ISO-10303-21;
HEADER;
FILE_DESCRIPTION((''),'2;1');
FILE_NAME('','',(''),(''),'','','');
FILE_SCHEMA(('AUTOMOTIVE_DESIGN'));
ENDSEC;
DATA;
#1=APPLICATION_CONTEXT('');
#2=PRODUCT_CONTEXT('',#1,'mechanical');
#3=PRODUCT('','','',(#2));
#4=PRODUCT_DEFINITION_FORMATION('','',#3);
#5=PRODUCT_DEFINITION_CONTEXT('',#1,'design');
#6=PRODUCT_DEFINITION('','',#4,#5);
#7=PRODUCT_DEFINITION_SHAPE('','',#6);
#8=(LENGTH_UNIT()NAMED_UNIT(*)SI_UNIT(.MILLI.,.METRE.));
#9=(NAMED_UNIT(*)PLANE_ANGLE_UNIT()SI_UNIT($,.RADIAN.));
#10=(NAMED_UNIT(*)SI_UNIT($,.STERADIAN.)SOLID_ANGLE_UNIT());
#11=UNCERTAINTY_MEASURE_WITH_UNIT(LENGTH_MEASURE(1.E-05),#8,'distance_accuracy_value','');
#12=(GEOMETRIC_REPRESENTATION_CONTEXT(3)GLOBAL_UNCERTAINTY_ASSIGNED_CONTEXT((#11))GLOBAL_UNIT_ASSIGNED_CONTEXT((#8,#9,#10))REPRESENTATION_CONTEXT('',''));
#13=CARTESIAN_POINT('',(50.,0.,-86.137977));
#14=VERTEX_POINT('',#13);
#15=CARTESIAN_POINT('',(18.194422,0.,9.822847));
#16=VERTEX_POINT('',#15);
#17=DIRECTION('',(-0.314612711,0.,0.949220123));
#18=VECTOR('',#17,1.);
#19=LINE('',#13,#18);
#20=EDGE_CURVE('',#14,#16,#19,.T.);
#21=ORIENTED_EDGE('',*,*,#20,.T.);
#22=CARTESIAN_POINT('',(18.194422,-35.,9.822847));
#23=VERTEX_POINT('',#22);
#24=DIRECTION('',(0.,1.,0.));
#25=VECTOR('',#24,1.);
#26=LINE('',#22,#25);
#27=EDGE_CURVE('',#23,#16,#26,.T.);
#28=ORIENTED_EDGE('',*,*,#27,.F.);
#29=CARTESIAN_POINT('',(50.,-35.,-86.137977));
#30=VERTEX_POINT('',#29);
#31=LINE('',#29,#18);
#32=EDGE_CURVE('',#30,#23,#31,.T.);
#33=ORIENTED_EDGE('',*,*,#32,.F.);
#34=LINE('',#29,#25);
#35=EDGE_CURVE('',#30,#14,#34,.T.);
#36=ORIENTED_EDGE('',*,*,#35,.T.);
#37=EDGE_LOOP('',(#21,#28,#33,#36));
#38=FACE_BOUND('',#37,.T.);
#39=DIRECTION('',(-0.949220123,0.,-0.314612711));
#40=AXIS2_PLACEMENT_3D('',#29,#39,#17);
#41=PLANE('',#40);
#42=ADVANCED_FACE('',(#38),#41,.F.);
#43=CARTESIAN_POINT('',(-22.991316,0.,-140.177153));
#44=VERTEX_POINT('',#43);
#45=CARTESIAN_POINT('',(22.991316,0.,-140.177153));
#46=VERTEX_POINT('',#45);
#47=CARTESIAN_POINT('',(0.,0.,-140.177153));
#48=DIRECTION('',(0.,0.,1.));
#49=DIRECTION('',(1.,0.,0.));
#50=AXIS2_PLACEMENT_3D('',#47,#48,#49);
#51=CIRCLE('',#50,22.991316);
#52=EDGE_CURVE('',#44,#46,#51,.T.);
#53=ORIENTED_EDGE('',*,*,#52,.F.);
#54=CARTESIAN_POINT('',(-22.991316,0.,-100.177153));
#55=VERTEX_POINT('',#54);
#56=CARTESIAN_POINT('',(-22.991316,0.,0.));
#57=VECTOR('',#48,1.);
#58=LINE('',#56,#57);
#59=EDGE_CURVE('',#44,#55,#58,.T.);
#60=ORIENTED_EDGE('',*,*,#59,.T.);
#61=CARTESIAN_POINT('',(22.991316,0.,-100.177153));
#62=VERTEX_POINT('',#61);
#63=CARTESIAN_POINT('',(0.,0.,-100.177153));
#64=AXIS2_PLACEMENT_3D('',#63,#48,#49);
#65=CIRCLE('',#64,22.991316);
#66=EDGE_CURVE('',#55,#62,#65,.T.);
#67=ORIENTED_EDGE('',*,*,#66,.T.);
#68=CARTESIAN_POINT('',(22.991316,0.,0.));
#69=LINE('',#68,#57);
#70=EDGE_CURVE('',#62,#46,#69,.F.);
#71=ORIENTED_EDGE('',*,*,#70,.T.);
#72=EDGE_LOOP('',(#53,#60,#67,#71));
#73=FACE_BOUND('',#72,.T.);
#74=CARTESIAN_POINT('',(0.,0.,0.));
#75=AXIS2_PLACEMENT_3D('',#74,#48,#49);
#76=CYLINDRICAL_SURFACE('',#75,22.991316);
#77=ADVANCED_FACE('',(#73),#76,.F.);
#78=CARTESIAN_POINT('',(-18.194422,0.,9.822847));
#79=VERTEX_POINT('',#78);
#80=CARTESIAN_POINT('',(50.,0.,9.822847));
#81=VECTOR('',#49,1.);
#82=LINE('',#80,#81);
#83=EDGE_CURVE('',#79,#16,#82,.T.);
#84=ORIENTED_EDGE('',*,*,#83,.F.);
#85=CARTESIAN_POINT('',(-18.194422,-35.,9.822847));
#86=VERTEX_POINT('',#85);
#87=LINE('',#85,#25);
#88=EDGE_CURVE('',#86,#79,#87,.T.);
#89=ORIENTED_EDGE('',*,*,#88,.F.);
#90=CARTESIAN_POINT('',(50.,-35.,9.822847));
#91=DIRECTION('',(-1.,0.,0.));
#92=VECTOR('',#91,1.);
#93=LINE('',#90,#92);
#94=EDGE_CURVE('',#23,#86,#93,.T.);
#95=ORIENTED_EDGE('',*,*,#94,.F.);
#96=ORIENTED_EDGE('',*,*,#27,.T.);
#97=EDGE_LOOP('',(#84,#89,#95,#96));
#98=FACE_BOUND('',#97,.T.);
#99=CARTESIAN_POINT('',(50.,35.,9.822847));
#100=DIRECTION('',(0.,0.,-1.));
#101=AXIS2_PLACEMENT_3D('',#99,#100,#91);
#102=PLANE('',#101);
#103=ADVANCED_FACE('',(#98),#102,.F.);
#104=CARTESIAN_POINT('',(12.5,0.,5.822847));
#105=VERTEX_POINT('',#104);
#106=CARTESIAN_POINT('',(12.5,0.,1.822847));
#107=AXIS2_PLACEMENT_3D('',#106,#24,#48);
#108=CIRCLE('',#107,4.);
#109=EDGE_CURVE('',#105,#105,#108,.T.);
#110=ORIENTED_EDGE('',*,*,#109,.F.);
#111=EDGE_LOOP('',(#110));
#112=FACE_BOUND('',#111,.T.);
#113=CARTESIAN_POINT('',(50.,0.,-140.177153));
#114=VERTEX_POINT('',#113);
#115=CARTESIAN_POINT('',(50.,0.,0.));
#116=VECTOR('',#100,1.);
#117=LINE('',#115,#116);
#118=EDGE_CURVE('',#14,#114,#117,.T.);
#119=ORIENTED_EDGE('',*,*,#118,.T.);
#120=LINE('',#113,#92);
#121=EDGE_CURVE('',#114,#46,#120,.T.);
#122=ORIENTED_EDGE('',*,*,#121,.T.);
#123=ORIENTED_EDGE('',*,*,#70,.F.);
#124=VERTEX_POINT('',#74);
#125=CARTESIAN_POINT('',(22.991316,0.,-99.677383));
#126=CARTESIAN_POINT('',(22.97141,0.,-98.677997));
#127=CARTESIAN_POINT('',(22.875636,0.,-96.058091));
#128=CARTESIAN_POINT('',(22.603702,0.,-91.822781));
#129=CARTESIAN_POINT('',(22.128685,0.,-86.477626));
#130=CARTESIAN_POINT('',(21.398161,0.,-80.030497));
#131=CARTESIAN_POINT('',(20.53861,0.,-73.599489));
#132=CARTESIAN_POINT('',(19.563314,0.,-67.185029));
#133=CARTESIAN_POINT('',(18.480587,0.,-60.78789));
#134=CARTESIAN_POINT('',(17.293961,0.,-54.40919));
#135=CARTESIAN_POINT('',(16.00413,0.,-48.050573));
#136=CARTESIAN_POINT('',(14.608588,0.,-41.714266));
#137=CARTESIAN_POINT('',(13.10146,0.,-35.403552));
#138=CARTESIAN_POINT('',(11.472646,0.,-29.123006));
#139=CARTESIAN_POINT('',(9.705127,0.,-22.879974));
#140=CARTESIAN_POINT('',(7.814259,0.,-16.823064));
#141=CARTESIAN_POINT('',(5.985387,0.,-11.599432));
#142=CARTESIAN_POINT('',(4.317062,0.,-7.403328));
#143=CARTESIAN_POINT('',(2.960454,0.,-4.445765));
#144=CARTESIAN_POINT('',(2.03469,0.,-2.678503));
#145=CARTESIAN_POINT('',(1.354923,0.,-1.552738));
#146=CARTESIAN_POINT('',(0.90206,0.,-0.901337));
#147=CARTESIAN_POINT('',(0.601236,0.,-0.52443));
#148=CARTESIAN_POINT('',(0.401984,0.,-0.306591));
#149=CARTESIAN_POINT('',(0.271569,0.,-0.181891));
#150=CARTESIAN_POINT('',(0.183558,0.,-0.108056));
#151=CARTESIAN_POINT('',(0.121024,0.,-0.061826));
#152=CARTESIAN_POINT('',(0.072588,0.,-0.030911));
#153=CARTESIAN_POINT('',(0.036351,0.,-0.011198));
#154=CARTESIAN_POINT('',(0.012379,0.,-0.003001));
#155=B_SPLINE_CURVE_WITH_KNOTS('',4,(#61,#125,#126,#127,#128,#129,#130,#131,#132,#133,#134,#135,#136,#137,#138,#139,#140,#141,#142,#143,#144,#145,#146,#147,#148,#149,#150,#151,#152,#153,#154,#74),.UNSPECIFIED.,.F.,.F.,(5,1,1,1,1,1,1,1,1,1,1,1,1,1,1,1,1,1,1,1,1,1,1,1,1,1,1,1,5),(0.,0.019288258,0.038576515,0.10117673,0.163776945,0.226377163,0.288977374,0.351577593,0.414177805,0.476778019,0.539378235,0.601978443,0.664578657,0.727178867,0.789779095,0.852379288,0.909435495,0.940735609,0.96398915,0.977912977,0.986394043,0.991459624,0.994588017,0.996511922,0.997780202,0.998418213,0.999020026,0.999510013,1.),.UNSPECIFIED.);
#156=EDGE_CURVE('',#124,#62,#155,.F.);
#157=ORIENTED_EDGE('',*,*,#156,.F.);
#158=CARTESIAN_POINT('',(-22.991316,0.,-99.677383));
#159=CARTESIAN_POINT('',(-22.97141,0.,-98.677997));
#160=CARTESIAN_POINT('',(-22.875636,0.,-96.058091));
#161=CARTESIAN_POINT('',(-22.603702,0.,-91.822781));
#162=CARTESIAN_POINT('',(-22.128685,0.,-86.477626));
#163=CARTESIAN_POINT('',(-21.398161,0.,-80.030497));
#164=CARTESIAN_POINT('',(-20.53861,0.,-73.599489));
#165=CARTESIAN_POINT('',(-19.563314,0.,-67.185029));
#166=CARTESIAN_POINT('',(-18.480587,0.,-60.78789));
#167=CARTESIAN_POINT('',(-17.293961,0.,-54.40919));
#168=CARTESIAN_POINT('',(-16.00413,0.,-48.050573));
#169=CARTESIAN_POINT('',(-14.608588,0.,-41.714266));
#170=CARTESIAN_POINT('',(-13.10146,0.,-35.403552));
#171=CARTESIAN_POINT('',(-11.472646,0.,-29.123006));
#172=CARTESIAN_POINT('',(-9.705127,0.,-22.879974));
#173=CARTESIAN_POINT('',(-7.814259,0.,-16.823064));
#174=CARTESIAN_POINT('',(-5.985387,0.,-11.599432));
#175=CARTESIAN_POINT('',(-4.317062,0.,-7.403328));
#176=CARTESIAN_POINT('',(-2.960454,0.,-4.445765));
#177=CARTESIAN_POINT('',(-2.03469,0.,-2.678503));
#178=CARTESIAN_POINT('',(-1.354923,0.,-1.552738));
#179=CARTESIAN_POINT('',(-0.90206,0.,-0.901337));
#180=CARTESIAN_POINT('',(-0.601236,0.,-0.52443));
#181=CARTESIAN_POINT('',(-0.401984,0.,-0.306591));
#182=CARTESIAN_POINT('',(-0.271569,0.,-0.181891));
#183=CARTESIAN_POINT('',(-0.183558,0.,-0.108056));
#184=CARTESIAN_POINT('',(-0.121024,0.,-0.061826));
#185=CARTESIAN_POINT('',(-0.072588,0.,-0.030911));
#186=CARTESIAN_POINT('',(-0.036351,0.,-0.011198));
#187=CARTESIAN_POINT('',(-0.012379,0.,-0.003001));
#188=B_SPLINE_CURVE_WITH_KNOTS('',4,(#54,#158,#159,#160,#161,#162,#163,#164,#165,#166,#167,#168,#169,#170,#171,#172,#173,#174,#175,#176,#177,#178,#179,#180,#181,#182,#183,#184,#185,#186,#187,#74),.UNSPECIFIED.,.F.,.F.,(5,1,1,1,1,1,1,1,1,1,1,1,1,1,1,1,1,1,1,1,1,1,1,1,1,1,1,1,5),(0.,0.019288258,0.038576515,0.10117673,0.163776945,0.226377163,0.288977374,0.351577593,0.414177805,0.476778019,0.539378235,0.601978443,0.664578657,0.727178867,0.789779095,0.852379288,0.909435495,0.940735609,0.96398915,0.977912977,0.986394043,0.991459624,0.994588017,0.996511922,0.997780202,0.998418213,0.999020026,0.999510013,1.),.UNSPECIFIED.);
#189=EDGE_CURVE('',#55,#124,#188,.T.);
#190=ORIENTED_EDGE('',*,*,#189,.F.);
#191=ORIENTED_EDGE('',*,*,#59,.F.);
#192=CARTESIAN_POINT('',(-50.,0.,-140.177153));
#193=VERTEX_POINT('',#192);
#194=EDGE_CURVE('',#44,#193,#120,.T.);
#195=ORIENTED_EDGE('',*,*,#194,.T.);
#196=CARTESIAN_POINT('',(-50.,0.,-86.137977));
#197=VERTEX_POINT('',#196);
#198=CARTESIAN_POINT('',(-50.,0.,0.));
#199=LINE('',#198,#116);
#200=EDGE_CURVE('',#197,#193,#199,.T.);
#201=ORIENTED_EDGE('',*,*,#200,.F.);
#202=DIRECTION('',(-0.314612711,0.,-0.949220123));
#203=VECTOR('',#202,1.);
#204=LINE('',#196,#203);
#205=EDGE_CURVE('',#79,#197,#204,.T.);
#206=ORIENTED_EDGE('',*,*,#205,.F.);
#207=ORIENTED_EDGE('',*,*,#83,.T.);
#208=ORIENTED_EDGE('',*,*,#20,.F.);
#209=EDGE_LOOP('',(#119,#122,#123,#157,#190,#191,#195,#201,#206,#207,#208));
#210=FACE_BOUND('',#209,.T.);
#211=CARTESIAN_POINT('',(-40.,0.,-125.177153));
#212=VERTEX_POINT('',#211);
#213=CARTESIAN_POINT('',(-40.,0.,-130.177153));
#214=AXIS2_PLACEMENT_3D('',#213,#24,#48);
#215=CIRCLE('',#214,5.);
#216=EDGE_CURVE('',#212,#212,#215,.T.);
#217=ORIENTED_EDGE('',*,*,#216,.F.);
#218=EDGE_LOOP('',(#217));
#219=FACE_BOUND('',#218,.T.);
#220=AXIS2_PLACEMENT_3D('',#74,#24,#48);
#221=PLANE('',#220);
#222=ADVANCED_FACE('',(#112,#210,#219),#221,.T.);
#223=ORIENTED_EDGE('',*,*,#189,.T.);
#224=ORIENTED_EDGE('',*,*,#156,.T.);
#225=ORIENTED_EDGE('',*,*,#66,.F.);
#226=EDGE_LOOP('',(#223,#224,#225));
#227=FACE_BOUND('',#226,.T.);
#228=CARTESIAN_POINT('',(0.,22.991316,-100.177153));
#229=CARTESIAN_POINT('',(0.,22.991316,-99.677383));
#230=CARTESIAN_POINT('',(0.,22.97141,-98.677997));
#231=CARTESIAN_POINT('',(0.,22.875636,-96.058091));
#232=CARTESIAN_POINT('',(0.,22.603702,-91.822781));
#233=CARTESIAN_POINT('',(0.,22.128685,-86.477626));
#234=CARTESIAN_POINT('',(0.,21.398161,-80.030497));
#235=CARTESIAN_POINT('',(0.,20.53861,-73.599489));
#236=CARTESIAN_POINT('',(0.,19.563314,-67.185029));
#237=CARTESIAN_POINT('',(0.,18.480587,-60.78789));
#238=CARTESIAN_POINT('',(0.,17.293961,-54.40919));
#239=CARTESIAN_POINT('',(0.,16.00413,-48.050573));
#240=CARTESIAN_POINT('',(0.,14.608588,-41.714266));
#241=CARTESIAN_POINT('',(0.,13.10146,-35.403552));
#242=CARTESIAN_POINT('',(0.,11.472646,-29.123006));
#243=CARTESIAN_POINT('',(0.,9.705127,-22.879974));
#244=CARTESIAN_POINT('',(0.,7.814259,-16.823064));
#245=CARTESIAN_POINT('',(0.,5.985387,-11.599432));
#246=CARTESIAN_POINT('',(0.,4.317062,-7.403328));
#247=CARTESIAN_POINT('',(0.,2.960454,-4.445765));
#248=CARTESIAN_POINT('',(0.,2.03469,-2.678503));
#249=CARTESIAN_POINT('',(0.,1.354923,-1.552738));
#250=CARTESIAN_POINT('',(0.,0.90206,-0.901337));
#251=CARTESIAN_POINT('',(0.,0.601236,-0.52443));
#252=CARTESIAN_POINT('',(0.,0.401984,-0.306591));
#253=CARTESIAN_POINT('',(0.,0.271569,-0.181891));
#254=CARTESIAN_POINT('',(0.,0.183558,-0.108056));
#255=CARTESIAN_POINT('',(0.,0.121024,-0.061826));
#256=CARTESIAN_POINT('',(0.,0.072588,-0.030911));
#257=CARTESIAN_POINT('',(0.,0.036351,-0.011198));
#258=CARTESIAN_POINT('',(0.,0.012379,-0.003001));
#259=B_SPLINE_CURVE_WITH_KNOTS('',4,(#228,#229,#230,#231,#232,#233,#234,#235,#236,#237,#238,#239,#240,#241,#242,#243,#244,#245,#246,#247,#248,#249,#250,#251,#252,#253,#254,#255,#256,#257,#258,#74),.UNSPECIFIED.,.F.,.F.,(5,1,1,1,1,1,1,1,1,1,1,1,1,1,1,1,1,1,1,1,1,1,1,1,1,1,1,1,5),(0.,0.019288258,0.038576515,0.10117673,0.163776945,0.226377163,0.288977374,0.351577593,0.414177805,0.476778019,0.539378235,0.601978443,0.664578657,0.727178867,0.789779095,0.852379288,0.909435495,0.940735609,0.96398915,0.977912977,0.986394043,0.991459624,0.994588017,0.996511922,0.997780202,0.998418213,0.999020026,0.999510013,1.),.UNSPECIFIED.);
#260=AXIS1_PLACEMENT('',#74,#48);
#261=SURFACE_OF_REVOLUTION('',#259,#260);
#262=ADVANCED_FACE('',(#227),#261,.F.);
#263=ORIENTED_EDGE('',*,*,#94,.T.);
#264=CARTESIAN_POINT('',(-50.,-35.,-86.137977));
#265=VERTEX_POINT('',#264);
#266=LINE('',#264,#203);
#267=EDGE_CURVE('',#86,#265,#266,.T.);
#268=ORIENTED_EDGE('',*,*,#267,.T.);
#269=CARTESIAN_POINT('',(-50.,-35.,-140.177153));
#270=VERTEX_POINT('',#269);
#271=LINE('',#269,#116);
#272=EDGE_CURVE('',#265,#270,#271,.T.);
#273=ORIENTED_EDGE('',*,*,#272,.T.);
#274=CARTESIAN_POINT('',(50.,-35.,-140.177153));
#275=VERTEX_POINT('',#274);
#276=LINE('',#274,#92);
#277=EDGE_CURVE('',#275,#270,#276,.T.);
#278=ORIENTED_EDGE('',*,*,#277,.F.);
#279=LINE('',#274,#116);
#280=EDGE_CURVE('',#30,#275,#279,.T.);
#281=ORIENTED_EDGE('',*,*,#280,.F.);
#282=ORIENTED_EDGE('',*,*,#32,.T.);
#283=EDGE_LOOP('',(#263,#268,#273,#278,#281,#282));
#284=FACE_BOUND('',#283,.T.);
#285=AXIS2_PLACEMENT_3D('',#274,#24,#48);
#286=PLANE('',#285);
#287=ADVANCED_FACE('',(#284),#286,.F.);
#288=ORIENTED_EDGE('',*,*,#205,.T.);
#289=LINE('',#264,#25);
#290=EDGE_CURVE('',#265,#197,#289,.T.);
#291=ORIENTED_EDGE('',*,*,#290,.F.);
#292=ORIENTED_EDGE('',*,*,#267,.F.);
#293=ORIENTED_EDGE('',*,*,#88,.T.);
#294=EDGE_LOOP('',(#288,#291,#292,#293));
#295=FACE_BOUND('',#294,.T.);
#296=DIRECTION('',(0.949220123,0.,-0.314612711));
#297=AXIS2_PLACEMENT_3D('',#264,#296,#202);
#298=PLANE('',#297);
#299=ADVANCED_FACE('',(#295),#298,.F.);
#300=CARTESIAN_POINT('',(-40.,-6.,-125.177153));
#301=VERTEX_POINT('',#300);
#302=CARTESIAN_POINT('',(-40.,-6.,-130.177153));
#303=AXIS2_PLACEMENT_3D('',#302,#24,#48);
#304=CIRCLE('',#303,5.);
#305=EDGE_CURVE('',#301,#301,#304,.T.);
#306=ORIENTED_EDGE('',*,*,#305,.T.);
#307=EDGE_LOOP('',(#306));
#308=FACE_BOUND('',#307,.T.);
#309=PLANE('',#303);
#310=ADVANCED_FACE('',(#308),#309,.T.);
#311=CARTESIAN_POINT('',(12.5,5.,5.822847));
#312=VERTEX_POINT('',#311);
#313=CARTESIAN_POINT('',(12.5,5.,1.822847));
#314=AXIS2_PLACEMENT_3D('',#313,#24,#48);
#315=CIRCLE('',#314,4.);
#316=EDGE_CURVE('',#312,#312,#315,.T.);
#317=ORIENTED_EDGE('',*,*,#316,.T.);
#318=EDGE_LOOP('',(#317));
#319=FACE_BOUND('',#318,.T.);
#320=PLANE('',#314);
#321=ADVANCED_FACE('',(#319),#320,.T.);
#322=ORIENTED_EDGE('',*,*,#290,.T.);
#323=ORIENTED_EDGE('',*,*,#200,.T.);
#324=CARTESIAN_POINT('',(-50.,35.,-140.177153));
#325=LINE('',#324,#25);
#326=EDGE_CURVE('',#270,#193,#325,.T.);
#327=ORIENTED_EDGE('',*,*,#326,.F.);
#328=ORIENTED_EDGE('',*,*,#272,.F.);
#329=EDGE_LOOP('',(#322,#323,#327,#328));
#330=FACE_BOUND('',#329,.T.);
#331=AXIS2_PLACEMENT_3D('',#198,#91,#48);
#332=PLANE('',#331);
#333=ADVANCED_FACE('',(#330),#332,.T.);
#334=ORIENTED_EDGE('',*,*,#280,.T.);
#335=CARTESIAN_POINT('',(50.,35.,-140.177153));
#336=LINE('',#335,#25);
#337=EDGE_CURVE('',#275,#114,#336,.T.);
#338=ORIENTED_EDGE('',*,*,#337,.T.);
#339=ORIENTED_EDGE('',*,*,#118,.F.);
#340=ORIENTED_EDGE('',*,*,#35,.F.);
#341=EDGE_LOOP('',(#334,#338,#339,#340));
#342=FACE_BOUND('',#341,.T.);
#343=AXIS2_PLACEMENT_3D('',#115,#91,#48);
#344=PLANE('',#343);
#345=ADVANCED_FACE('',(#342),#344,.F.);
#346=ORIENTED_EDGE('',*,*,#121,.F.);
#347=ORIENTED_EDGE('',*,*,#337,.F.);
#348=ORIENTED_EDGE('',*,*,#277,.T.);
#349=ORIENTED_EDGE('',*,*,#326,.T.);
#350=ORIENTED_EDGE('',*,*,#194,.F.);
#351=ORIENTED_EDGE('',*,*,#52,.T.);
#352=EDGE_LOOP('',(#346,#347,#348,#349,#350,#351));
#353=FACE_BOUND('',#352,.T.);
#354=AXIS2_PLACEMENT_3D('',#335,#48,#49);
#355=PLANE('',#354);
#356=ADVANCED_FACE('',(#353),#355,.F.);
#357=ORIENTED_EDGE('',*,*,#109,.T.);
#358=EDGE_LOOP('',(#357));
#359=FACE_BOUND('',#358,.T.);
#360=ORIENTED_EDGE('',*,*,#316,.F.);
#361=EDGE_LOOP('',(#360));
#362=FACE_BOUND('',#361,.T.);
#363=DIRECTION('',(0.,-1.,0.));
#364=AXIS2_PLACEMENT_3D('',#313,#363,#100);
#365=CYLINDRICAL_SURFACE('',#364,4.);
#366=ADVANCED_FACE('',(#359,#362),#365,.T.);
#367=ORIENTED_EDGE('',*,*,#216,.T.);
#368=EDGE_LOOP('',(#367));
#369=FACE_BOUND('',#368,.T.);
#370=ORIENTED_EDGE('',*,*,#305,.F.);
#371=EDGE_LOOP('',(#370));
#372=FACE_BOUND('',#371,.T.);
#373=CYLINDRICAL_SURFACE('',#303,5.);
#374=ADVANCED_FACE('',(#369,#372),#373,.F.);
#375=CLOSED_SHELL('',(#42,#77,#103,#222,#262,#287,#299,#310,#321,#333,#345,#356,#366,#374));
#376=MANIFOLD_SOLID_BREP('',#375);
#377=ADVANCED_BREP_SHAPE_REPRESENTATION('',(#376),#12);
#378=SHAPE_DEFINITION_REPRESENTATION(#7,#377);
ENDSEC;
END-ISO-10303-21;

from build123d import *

# Parameters (mm, degrees)
SKETCH2_W            = 150
SKETCH2_H            = 70
BOSS_EXTRUDE1_DEPTH  = 50
INTERSECT1_OUTLINE_W = 100
INTERSECT1_OUTLINE_H = 150
INTERSECT1_DEPTH     = 35
CUT_EXTRUDE1_DEPTH   = 153.887652053
SKETCH4_R            = 4
BOSS_EXTRUDE2_DEPTH  = 5
SKETCH8_R            = 5
CUT_EXTRUDE2_DEPTH   = 6


# Read off the part's stored shape, not the designer's step: Intersect1
with BuildPart() as part:
    # Sketch2 → Boss-Extrude1 (new, symmetric)
    with BuildSketch(Plane(origin=(0, 0, 0), x_dir=(0, 0, -1), z_dir=(1, 0, 0))):
        with Locations((65.177152604, 0)):
            Rectangle(SKETCH2_W, SKETCH2_H)
    extrude(amount=BOSS_EXTRUDE1_DEPTH, both=True)

    # Sketch1 → Cut-Revolve1 (revolve, cut)
    with BuildSketch(Plane(origin=(0, 0, 0), x_dir=(0, 0, -1), z_dir=(1, 0, 0)), mode=Mode.PRIVATE) as cut_revolve1_sk:
        with BuildLine():
            Line((140.177152604, 22.991315667), (100.177152604, 22.991315667))
            add(Edge.make_bspline(
                [(0, 0), (0.003001049, 0.012379499), (0.011197692, 0.036351162), (0.030910939, 0.072587893), (0.061826137, 0.121023529), (0.108056169, 0.183557631), (0.181890949, 0.271568579), (0.306591117, 0.401983994), (0.524430354, 0.601235581), (0.901337009, 0.902060291), (1.552737658, 1.35492318), (2.678502901, 2.03469009), (4.445764918, 2.96045388), (7.403328149, 4.31706154), (11.599431889, 5.985386832), (16.823063538, 7.814259146), (22.879973582, 9.705127394), (29.12300565, 11.472646372), (35.403551613, 13.101460315), (41.714266155, 14.60858848), (48.050573205, 16.004129586), (54.409190393, 17.293961353), (60.787889899, 18.480587367), (67.185029056, 19.563313869), (73.599488728, 20.538609835), (80.030497438, 21.398160754), (86.47762614, 22.128684831), (91.82278076, 22.603702016), (96.058091382, 22.875635683), (98.677996749, 22.971409991), (99.677383084, 22.991315667), (100.177152604, 22.991315667)],
                knots=[0, 0, 0, 0, 0, 0.000489987, 0.000979974, 0.001581787, 0.002219798, 0.003488078, 0.005411983, 0.008540376, 0.013605957, 0.022087023, 0.03601085, 0.059264391, 0.090564505, 0.147620712, 0.210220905, 0.272821133, 0.335421343, 0.398021557, 0.460621765, 0.523221981, 0.585822195, 0.648422407, 0.711022626, 0.773622837, 0.836223055, 0.89882327, 0.961423485, 0.980711742, 1, 1, 1, 1, 1], degree=4))
            Line((0, 0), (140.177152604, 0))
            Line((140.177152604, 0), (140.177152604, 22.991315667))
        make_face()
    revolve(cut_revolve1_sk.sketch.rotate(Axis((0, 0, 0), (0, 0, -1)), 90), axis=Axis((0, 0, 0), (0, 0, -1)), mode=Mode.SUBTRACT)

    # Intersect1 outline → Intersect1 (cut)
    with BuildSketch(Plane(origin=(0, 0, 0), x_dir=(1, 0, 0), z_dir=(0, 1, 0))):
        with Locations((0, 65.177152604)):
            Rectangle(INTERSECT1_OUTLINE_W, INTERSECT1_OUTLINE_H)
    extrude(amount=INTERSECT1_DEPTH, mode=Mode.SUBTRACT)

    # Sketch5 → Cut-Extrude1 (cut, through all)
    with BuildSketch(Plane(origin=(0, 0, 0), x_dir=(1, 0, 0), z_dir=(0, 1, 0))):
        Polygon((50, 86.137976919), (18.194421541, -9.822847396), (0, -21.198201401), (-18.194421541, -9.822847396), (-50, 86.137976919), (-75.365394844, 84.804131947), (-88.729692443, -46.913449713), (-13.099565549, -40.658440604), (76.90354762, -33.214709966), (74.65964276, 87.590776178), align=None)
    extrude(amount=-CUT_EXTRUDE1_DEPTH, mode=Mode.SUBTRACT)

    # Sketch4 → Boss-Extrude2 (add)
    with BuildSketch(Plane(origin=(0, 0, 0), x_dir=(1, 0, 0), z_dir=(0, 1, 0))):
        with Locations(Location((12.5, -1.822847396, 0), (0, 0, 270))):
            Circle(SKETCH4_R)
    extrude(amount=BOSS_EXTRUDE2_DEPTH)

    # Sketch8 → Cut-Extrude2 (cut)
    with BuildSketch(Plane(origin=(0, 0, 0), x_dir=(1, 0, 0), z_dir=(0, 1, 0))):
        with Locations(Location((-40, 130.177152604, 0), (0, 0, 270))):
            Circle(SKETCH8_R)
    extrude(amount=-CUT_EXTRUDE2_DEPTH, mode=Mode.SUBTRACT)


solid = part.part
